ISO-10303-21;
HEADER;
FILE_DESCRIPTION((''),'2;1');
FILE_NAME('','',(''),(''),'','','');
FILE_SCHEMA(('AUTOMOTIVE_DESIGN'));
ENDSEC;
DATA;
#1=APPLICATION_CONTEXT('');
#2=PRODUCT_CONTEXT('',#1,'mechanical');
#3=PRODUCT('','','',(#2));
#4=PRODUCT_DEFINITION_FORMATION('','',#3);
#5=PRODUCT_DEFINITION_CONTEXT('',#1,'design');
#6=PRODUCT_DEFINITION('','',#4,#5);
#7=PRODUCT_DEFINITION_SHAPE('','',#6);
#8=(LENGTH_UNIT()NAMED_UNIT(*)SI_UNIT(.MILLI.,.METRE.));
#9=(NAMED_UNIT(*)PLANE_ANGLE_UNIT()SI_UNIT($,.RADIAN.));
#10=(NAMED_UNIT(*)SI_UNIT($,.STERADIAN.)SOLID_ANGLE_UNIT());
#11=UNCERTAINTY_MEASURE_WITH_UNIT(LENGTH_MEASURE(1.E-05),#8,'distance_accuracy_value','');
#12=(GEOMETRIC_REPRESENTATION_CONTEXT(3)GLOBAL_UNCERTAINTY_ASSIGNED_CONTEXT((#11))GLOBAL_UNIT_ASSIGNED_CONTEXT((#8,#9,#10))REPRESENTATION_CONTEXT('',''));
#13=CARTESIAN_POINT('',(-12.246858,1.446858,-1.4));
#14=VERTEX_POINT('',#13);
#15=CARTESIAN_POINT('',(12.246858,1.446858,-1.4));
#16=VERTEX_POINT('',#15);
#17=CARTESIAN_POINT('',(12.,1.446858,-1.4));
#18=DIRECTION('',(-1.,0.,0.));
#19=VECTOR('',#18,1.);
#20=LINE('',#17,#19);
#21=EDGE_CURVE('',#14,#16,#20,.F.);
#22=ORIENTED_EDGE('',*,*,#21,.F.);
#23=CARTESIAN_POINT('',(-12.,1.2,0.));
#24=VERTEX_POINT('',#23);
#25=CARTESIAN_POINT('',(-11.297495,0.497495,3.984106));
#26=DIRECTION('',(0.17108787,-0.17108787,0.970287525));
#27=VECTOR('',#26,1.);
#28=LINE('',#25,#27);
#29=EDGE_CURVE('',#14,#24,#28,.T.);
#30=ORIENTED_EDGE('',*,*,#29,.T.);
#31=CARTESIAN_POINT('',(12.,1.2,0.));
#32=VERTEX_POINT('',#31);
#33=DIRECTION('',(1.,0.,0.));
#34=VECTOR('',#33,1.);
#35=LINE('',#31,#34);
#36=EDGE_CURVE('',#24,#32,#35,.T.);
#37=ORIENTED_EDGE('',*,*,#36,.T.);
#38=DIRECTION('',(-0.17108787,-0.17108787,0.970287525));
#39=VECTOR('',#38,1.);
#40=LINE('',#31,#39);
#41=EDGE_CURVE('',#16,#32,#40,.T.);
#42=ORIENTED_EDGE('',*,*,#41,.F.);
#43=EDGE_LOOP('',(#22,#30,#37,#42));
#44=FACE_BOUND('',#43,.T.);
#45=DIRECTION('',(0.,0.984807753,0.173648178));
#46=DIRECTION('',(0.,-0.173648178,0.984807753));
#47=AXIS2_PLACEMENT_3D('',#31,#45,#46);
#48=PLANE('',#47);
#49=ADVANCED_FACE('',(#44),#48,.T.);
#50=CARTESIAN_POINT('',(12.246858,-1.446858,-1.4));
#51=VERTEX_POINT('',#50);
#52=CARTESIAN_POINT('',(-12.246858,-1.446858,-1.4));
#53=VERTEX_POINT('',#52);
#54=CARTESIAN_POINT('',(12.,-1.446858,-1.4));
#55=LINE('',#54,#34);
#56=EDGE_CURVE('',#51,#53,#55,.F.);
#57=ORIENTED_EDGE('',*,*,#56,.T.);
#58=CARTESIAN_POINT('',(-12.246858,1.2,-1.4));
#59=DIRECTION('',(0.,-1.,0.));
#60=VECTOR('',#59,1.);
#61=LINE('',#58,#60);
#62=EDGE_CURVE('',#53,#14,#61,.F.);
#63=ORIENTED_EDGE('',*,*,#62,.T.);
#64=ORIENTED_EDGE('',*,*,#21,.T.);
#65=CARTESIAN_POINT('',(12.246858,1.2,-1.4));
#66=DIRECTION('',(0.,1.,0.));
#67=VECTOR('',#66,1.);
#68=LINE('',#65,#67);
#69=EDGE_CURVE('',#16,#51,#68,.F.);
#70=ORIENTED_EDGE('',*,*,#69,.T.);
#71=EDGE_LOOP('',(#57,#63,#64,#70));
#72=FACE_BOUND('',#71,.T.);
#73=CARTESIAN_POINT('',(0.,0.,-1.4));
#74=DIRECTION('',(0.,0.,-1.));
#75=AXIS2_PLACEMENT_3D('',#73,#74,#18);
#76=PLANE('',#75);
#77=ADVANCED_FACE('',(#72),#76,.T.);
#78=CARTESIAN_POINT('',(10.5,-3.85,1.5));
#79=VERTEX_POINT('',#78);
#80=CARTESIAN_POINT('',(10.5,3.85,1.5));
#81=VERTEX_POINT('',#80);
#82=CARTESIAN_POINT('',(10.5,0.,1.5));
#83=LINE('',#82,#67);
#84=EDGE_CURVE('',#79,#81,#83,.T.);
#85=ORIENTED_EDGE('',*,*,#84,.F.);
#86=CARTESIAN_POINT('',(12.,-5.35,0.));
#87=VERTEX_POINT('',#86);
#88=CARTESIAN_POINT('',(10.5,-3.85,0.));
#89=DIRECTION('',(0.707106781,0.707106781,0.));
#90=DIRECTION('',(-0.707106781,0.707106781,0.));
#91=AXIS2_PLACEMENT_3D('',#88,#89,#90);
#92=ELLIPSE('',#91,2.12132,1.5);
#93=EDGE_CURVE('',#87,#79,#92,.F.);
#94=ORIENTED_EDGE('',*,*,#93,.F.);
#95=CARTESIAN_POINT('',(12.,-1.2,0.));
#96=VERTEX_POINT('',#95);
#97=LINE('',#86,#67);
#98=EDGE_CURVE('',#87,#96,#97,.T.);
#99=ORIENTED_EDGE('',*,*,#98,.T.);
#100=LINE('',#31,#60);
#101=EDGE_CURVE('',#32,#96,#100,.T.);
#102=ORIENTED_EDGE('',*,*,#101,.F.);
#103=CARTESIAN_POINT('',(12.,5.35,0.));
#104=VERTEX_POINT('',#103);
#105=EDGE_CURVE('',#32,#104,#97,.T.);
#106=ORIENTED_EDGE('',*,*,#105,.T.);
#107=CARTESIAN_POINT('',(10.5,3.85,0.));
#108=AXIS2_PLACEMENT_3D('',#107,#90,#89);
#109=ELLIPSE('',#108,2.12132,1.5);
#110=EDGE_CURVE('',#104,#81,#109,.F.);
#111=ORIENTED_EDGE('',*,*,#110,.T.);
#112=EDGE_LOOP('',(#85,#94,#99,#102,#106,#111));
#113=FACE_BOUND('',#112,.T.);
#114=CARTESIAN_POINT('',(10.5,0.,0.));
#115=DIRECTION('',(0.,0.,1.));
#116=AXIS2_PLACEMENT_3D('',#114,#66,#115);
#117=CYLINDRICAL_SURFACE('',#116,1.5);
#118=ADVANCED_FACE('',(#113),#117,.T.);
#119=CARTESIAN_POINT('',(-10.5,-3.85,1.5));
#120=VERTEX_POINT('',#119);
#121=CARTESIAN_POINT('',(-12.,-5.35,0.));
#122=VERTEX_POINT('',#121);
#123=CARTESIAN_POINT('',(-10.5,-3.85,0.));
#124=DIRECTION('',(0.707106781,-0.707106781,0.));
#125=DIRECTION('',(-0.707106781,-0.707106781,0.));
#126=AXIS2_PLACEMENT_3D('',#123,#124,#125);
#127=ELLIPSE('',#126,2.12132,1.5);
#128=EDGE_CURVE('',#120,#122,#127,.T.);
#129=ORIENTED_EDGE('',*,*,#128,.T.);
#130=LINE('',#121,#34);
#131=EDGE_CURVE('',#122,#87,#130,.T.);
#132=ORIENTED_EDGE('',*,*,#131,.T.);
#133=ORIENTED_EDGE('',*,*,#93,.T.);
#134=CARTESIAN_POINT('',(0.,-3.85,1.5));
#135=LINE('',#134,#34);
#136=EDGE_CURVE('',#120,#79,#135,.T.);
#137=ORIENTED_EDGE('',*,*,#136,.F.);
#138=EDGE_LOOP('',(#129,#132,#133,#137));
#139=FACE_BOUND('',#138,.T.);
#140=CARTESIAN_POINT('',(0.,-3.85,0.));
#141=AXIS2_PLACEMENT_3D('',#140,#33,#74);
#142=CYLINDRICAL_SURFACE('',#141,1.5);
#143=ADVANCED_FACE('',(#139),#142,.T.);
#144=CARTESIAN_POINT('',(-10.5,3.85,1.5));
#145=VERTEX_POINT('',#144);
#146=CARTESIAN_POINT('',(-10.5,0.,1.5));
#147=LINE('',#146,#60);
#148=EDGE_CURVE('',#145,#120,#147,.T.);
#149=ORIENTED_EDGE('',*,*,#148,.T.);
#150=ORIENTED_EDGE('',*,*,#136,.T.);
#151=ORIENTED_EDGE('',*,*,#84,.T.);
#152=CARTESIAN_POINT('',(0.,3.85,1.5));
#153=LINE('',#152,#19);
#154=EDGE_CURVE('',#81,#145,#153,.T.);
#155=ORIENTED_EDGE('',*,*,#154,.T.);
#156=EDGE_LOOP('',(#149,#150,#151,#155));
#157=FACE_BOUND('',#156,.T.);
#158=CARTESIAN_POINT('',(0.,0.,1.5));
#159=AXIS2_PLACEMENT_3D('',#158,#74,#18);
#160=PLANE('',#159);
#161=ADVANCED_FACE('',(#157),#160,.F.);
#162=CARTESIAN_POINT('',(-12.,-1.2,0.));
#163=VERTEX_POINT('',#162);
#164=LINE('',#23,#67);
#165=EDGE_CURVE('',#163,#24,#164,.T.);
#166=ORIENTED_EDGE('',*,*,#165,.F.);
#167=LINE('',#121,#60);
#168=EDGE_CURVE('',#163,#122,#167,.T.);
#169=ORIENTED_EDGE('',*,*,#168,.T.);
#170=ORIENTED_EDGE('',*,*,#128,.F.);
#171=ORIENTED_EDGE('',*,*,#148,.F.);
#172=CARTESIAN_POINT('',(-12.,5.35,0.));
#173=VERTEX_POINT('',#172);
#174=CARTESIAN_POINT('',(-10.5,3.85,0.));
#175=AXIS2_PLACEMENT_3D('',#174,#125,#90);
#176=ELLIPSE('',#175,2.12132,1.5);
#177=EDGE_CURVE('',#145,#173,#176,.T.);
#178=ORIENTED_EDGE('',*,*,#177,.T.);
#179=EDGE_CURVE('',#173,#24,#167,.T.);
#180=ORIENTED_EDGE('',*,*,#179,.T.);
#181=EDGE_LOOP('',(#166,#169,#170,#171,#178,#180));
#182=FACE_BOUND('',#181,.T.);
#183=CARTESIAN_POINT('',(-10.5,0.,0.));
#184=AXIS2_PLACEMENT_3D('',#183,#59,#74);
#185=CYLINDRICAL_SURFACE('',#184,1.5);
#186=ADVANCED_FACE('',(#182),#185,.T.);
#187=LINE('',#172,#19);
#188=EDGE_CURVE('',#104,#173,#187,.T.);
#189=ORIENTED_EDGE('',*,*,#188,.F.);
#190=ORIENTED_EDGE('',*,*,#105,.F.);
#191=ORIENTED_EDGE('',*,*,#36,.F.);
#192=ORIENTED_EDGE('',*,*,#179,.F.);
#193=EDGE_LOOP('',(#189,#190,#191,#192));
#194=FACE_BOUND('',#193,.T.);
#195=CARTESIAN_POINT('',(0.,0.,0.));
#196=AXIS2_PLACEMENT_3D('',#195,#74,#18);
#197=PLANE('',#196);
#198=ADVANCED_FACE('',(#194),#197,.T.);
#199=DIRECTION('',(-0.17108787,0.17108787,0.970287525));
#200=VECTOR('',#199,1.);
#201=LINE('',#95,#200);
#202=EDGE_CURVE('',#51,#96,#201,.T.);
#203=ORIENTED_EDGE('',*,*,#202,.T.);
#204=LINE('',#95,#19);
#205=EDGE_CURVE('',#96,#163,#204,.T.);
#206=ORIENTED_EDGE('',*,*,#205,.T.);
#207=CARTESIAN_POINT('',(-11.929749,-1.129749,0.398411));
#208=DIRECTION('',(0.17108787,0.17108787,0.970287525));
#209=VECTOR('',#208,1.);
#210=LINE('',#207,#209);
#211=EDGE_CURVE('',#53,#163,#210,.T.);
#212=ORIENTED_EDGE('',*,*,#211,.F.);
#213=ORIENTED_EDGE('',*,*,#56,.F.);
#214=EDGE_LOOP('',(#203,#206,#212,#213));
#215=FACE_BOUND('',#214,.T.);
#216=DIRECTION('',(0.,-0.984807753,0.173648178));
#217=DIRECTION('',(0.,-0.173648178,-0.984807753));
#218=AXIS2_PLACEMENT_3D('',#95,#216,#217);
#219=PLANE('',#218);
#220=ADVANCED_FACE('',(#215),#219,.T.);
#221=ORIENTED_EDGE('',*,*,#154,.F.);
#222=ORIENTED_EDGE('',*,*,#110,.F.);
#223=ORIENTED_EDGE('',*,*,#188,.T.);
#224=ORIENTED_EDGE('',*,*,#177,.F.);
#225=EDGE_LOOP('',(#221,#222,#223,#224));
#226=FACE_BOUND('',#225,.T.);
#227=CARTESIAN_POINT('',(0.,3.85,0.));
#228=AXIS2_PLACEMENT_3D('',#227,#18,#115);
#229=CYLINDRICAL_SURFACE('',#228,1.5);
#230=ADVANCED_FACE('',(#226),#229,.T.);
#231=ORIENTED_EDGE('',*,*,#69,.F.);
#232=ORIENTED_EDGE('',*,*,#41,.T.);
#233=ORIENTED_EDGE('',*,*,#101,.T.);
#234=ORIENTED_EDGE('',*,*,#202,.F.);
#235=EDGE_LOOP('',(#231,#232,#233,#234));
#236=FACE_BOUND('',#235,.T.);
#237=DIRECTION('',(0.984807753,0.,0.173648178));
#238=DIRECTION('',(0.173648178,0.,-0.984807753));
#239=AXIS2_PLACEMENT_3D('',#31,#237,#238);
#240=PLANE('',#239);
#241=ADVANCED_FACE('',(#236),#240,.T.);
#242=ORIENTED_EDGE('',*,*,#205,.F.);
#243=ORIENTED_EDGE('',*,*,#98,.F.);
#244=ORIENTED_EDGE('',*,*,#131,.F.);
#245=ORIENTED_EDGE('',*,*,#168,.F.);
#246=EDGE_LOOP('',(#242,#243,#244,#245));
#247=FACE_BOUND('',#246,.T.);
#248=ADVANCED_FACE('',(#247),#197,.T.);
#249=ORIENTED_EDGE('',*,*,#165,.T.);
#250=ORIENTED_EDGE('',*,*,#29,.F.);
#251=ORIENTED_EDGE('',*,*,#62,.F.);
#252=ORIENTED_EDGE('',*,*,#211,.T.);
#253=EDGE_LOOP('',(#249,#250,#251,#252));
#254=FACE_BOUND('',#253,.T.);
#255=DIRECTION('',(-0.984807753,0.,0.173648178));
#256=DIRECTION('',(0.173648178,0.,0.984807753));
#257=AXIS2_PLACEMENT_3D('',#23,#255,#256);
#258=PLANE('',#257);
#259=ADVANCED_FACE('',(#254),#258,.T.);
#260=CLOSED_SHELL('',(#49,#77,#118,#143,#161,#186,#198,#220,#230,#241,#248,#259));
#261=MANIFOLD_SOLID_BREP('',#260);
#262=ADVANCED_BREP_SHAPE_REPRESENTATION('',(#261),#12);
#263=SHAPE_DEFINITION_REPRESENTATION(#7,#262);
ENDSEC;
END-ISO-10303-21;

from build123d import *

# Parameters (mm, degrees)
SKETCH1_W           = 24
SKETCH1_H           = 10.7
BOSS_EXTRUDE1_DEPTH = 1.5
SKETCH2_W           = 24
SKETCH2_H           = 2.4
BOSS_EXTRUDE2_DEPTH = 1.4
BOSS_EXTRUDE2_DRAFT = -10
FILLET1_R           = 1.5


with BuildPart() as part:
    # Sketch1 → Boss-Extrude1 (new body)
    with BuildSketch(Plane.XY):
        Rectangle(SKETCH1_W, SKETCH1_H)
    extrude(amount=BOSS_EXTRUDE1_DEPTH)


with BuildPart() as boss_extrude2_tool:
    # Sketch2 → Boss-Extrude2 (with draft: the straight prism first)
    with BuildSketch(Plane(origin=(0, 0, 0), x_dir=(-1, 0, 0), z_dir=(0, 0, -1))):
        Rectangle(SKETCH2_W, SKETCH2_H)
    extrude(amount=BOSS_EXTRUDE2_DEPTH)
    # Boss-Extrude2: the draft: its side faces are tilted about the plane it starts from
    boss_extrude2_sides = [boss_extrude2_tool.faces().sort_by_distance(p)[0] for p in [
        (12, 0, -0.7),
        (0, -1.2, -0.7),
        (-12, 0, -0.7),
        (0, 1.2, -0.7),
    ]]
    draft(boss_extrude2_sides, Plane(origin=(0, 0, 0), x_dir=(-1, 0, 0), z_dir=(0, 0, -1)), BOSS_EXTRUDE2_DRAFT)


with BuildPart() as part_1:
    add(part.part)

    # Boss-Extrude2: add boss_extrude2_tool
    add(boss_extrude2_tool.part)

    # Fillet1
    fillet1_edges = [part_1.edges().sort_by_distance(p)[0] for p in [
        (0, -5.35, 1.5),
        (-12, 0, 1.5),
        (0, 5.35, 1.5),
        (12, 0, 1.5),
    ]]
    fillet(fillet1_edges, radius=FILLET1_R - 0.0001)  # a hair under: the kernel refuses the full size


solid = part_1.part
